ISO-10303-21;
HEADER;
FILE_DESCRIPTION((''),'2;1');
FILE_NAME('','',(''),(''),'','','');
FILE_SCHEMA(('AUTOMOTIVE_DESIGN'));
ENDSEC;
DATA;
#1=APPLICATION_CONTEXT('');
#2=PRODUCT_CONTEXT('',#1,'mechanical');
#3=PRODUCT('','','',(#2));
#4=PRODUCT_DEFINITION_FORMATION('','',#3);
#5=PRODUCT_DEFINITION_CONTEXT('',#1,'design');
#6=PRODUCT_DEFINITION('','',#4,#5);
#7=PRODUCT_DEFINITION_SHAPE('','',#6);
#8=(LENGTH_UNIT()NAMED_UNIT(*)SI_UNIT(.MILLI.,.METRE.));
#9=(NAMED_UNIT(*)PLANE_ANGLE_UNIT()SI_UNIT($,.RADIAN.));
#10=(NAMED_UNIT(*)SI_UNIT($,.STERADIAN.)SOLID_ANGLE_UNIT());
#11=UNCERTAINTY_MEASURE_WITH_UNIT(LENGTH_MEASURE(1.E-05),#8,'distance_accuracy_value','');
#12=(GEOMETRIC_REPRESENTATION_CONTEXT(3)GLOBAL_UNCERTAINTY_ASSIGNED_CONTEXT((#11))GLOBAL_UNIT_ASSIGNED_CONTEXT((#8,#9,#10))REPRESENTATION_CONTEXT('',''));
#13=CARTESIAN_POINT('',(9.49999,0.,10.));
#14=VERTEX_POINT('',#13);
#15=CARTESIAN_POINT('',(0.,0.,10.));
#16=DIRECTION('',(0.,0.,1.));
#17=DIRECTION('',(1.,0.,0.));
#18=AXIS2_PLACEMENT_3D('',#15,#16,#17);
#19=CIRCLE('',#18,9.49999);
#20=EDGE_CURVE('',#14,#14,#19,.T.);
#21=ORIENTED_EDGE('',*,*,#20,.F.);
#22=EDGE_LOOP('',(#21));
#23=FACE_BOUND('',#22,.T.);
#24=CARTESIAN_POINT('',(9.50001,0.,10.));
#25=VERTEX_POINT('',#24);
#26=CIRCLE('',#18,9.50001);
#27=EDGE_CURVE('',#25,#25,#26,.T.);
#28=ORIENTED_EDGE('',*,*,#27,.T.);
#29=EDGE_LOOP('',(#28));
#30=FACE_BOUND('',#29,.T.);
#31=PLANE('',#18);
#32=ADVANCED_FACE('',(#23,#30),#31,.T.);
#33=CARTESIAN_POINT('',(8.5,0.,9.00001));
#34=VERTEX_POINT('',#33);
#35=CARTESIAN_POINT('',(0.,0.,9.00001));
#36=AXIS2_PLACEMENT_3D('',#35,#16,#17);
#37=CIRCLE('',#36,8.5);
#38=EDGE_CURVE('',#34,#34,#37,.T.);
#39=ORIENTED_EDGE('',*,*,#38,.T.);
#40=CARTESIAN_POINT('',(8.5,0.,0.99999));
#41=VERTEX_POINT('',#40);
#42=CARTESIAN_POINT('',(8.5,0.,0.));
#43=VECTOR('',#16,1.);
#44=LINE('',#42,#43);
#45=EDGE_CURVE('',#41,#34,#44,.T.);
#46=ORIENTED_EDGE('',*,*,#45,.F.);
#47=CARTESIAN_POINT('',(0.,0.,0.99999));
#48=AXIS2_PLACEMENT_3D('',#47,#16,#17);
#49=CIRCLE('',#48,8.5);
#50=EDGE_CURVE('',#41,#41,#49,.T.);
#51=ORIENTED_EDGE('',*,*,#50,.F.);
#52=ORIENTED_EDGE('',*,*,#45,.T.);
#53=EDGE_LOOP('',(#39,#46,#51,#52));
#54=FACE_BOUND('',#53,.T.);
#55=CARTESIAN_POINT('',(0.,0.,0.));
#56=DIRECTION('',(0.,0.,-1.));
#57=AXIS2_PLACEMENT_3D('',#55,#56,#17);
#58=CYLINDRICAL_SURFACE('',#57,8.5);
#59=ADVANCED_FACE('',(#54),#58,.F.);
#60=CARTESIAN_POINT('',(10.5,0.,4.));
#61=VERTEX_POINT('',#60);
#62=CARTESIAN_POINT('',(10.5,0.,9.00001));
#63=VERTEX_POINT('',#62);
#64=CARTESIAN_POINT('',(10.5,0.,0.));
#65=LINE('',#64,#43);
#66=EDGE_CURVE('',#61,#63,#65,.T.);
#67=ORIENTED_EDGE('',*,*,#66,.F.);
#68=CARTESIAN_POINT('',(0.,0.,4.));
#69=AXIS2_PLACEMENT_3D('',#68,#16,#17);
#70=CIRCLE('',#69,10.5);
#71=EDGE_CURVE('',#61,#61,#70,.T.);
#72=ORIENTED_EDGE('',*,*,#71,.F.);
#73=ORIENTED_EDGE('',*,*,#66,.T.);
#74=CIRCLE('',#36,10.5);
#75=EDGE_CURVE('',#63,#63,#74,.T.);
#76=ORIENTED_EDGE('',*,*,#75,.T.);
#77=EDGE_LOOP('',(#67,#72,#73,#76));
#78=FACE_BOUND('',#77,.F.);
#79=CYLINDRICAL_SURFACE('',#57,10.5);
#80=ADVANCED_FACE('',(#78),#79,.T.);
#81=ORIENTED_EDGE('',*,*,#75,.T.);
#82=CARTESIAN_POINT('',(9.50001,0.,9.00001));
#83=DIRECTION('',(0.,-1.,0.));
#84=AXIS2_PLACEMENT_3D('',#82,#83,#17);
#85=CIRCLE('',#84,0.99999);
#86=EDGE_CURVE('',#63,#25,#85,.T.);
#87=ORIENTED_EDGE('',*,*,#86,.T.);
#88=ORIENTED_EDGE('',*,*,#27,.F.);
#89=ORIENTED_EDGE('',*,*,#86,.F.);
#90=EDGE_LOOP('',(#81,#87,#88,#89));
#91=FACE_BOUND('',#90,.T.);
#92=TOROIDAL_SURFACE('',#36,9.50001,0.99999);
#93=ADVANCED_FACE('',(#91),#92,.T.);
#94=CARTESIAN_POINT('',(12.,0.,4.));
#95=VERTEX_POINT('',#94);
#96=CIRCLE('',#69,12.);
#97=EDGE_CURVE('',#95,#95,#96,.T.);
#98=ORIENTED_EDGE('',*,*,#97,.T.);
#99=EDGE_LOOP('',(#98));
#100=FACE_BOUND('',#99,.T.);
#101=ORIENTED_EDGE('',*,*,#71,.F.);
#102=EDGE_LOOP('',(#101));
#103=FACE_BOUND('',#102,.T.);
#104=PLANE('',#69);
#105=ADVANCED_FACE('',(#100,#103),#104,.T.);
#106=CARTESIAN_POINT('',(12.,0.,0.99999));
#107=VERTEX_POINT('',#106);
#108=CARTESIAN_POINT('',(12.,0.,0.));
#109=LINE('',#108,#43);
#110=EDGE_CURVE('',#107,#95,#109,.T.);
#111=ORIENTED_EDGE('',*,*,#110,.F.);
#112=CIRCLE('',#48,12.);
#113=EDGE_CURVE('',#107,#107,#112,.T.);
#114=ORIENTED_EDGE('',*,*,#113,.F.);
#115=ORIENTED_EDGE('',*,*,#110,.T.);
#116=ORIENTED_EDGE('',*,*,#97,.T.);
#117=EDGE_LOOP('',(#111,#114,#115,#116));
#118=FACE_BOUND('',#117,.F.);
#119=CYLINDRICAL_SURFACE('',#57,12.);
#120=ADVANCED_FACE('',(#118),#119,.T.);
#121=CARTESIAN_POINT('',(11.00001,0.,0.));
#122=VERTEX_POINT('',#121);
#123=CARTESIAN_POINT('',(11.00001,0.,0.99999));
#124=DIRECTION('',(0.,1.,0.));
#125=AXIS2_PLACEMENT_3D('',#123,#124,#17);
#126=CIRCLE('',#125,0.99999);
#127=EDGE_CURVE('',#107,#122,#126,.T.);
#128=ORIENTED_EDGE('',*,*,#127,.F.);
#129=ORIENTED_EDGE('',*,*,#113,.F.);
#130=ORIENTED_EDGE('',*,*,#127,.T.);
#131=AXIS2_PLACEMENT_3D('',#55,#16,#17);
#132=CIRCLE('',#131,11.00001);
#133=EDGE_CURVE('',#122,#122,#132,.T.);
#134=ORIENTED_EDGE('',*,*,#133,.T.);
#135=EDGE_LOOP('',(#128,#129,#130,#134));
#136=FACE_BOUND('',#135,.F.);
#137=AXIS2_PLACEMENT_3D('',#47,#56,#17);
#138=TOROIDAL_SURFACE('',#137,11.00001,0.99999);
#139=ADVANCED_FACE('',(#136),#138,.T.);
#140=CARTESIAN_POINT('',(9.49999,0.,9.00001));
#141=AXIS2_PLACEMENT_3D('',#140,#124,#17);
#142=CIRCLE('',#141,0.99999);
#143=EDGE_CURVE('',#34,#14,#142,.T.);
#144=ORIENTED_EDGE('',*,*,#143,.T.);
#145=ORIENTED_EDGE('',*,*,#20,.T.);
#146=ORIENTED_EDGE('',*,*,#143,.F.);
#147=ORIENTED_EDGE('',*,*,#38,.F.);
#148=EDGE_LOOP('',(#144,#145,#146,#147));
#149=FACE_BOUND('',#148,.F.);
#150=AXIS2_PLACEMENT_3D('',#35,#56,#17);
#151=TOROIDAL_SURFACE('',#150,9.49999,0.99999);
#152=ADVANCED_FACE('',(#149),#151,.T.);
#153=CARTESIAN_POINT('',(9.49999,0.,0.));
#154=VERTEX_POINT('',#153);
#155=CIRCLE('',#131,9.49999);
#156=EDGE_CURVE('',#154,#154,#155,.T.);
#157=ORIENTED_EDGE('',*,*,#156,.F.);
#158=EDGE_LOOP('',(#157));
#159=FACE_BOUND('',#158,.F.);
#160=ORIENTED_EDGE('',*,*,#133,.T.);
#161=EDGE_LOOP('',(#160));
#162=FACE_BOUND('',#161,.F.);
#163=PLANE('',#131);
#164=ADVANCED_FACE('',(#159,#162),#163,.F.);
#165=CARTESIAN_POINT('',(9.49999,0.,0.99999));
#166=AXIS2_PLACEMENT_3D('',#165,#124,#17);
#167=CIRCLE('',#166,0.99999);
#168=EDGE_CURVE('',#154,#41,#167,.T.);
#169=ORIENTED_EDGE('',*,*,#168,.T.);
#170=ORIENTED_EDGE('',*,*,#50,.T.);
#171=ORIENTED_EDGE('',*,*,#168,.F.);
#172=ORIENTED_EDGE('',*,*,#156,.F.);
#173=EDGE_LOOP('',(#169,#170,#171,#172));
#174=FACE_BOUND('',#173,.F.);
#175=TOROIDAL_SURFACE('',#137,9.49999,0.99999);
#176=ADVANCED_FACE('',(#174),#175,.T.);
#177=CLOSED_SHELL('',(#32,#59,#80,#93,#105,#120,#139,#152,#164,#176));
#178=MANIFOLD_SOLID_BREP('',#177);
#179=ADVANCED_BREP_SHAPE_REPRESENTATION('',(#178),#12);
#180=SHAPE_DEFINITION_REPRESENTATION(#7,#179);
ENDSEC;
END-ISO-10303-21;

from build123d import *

# Parameters (mm, degrees)
F0_R     = 10.5
F0_R_2   = 8.5
F1_DEPTH = 10
F0_R_3   = 12
F2_DEPTH = 4
F3_R     = 0.99999


# Not quite as in the source:
# - a fillet or chamfer is up to 0.001 mm smaller than in the source, because OpenCascade refuses the exact size


with BuildPart() as f1:
    # F0 (on Top) → F1 (new body)
    with BuildSketch(Plane.XY):
        Circle(F0_R)
        Circle(F0_R_2, mode=Mode.SUBTRACT)
    extrude(amount=F1_DEPTH)

    # F0 (on Top) → F2 (join)
    with BuildSketch(Plane.XY):
        Circle(F0_R_3)
        Circle(F0_R, mode=Mode.SUBTRACT)
    extrude(amount=F2_DEPTH)

    # F3 (radius 1 in the source; OpenCascade refuses exactly that, so slightly less here)
    f3_edges = [f1.edges().sort_by_distance(p)[0] for p in [
        (-8.5, 0, 0),
        (-12, 0, 0),
        (-8.5, 0, 10),
        (-10.5, 0, 10),
    ]]
    fillet(f3_edges, radius=F3_R)


solid = f1.part
